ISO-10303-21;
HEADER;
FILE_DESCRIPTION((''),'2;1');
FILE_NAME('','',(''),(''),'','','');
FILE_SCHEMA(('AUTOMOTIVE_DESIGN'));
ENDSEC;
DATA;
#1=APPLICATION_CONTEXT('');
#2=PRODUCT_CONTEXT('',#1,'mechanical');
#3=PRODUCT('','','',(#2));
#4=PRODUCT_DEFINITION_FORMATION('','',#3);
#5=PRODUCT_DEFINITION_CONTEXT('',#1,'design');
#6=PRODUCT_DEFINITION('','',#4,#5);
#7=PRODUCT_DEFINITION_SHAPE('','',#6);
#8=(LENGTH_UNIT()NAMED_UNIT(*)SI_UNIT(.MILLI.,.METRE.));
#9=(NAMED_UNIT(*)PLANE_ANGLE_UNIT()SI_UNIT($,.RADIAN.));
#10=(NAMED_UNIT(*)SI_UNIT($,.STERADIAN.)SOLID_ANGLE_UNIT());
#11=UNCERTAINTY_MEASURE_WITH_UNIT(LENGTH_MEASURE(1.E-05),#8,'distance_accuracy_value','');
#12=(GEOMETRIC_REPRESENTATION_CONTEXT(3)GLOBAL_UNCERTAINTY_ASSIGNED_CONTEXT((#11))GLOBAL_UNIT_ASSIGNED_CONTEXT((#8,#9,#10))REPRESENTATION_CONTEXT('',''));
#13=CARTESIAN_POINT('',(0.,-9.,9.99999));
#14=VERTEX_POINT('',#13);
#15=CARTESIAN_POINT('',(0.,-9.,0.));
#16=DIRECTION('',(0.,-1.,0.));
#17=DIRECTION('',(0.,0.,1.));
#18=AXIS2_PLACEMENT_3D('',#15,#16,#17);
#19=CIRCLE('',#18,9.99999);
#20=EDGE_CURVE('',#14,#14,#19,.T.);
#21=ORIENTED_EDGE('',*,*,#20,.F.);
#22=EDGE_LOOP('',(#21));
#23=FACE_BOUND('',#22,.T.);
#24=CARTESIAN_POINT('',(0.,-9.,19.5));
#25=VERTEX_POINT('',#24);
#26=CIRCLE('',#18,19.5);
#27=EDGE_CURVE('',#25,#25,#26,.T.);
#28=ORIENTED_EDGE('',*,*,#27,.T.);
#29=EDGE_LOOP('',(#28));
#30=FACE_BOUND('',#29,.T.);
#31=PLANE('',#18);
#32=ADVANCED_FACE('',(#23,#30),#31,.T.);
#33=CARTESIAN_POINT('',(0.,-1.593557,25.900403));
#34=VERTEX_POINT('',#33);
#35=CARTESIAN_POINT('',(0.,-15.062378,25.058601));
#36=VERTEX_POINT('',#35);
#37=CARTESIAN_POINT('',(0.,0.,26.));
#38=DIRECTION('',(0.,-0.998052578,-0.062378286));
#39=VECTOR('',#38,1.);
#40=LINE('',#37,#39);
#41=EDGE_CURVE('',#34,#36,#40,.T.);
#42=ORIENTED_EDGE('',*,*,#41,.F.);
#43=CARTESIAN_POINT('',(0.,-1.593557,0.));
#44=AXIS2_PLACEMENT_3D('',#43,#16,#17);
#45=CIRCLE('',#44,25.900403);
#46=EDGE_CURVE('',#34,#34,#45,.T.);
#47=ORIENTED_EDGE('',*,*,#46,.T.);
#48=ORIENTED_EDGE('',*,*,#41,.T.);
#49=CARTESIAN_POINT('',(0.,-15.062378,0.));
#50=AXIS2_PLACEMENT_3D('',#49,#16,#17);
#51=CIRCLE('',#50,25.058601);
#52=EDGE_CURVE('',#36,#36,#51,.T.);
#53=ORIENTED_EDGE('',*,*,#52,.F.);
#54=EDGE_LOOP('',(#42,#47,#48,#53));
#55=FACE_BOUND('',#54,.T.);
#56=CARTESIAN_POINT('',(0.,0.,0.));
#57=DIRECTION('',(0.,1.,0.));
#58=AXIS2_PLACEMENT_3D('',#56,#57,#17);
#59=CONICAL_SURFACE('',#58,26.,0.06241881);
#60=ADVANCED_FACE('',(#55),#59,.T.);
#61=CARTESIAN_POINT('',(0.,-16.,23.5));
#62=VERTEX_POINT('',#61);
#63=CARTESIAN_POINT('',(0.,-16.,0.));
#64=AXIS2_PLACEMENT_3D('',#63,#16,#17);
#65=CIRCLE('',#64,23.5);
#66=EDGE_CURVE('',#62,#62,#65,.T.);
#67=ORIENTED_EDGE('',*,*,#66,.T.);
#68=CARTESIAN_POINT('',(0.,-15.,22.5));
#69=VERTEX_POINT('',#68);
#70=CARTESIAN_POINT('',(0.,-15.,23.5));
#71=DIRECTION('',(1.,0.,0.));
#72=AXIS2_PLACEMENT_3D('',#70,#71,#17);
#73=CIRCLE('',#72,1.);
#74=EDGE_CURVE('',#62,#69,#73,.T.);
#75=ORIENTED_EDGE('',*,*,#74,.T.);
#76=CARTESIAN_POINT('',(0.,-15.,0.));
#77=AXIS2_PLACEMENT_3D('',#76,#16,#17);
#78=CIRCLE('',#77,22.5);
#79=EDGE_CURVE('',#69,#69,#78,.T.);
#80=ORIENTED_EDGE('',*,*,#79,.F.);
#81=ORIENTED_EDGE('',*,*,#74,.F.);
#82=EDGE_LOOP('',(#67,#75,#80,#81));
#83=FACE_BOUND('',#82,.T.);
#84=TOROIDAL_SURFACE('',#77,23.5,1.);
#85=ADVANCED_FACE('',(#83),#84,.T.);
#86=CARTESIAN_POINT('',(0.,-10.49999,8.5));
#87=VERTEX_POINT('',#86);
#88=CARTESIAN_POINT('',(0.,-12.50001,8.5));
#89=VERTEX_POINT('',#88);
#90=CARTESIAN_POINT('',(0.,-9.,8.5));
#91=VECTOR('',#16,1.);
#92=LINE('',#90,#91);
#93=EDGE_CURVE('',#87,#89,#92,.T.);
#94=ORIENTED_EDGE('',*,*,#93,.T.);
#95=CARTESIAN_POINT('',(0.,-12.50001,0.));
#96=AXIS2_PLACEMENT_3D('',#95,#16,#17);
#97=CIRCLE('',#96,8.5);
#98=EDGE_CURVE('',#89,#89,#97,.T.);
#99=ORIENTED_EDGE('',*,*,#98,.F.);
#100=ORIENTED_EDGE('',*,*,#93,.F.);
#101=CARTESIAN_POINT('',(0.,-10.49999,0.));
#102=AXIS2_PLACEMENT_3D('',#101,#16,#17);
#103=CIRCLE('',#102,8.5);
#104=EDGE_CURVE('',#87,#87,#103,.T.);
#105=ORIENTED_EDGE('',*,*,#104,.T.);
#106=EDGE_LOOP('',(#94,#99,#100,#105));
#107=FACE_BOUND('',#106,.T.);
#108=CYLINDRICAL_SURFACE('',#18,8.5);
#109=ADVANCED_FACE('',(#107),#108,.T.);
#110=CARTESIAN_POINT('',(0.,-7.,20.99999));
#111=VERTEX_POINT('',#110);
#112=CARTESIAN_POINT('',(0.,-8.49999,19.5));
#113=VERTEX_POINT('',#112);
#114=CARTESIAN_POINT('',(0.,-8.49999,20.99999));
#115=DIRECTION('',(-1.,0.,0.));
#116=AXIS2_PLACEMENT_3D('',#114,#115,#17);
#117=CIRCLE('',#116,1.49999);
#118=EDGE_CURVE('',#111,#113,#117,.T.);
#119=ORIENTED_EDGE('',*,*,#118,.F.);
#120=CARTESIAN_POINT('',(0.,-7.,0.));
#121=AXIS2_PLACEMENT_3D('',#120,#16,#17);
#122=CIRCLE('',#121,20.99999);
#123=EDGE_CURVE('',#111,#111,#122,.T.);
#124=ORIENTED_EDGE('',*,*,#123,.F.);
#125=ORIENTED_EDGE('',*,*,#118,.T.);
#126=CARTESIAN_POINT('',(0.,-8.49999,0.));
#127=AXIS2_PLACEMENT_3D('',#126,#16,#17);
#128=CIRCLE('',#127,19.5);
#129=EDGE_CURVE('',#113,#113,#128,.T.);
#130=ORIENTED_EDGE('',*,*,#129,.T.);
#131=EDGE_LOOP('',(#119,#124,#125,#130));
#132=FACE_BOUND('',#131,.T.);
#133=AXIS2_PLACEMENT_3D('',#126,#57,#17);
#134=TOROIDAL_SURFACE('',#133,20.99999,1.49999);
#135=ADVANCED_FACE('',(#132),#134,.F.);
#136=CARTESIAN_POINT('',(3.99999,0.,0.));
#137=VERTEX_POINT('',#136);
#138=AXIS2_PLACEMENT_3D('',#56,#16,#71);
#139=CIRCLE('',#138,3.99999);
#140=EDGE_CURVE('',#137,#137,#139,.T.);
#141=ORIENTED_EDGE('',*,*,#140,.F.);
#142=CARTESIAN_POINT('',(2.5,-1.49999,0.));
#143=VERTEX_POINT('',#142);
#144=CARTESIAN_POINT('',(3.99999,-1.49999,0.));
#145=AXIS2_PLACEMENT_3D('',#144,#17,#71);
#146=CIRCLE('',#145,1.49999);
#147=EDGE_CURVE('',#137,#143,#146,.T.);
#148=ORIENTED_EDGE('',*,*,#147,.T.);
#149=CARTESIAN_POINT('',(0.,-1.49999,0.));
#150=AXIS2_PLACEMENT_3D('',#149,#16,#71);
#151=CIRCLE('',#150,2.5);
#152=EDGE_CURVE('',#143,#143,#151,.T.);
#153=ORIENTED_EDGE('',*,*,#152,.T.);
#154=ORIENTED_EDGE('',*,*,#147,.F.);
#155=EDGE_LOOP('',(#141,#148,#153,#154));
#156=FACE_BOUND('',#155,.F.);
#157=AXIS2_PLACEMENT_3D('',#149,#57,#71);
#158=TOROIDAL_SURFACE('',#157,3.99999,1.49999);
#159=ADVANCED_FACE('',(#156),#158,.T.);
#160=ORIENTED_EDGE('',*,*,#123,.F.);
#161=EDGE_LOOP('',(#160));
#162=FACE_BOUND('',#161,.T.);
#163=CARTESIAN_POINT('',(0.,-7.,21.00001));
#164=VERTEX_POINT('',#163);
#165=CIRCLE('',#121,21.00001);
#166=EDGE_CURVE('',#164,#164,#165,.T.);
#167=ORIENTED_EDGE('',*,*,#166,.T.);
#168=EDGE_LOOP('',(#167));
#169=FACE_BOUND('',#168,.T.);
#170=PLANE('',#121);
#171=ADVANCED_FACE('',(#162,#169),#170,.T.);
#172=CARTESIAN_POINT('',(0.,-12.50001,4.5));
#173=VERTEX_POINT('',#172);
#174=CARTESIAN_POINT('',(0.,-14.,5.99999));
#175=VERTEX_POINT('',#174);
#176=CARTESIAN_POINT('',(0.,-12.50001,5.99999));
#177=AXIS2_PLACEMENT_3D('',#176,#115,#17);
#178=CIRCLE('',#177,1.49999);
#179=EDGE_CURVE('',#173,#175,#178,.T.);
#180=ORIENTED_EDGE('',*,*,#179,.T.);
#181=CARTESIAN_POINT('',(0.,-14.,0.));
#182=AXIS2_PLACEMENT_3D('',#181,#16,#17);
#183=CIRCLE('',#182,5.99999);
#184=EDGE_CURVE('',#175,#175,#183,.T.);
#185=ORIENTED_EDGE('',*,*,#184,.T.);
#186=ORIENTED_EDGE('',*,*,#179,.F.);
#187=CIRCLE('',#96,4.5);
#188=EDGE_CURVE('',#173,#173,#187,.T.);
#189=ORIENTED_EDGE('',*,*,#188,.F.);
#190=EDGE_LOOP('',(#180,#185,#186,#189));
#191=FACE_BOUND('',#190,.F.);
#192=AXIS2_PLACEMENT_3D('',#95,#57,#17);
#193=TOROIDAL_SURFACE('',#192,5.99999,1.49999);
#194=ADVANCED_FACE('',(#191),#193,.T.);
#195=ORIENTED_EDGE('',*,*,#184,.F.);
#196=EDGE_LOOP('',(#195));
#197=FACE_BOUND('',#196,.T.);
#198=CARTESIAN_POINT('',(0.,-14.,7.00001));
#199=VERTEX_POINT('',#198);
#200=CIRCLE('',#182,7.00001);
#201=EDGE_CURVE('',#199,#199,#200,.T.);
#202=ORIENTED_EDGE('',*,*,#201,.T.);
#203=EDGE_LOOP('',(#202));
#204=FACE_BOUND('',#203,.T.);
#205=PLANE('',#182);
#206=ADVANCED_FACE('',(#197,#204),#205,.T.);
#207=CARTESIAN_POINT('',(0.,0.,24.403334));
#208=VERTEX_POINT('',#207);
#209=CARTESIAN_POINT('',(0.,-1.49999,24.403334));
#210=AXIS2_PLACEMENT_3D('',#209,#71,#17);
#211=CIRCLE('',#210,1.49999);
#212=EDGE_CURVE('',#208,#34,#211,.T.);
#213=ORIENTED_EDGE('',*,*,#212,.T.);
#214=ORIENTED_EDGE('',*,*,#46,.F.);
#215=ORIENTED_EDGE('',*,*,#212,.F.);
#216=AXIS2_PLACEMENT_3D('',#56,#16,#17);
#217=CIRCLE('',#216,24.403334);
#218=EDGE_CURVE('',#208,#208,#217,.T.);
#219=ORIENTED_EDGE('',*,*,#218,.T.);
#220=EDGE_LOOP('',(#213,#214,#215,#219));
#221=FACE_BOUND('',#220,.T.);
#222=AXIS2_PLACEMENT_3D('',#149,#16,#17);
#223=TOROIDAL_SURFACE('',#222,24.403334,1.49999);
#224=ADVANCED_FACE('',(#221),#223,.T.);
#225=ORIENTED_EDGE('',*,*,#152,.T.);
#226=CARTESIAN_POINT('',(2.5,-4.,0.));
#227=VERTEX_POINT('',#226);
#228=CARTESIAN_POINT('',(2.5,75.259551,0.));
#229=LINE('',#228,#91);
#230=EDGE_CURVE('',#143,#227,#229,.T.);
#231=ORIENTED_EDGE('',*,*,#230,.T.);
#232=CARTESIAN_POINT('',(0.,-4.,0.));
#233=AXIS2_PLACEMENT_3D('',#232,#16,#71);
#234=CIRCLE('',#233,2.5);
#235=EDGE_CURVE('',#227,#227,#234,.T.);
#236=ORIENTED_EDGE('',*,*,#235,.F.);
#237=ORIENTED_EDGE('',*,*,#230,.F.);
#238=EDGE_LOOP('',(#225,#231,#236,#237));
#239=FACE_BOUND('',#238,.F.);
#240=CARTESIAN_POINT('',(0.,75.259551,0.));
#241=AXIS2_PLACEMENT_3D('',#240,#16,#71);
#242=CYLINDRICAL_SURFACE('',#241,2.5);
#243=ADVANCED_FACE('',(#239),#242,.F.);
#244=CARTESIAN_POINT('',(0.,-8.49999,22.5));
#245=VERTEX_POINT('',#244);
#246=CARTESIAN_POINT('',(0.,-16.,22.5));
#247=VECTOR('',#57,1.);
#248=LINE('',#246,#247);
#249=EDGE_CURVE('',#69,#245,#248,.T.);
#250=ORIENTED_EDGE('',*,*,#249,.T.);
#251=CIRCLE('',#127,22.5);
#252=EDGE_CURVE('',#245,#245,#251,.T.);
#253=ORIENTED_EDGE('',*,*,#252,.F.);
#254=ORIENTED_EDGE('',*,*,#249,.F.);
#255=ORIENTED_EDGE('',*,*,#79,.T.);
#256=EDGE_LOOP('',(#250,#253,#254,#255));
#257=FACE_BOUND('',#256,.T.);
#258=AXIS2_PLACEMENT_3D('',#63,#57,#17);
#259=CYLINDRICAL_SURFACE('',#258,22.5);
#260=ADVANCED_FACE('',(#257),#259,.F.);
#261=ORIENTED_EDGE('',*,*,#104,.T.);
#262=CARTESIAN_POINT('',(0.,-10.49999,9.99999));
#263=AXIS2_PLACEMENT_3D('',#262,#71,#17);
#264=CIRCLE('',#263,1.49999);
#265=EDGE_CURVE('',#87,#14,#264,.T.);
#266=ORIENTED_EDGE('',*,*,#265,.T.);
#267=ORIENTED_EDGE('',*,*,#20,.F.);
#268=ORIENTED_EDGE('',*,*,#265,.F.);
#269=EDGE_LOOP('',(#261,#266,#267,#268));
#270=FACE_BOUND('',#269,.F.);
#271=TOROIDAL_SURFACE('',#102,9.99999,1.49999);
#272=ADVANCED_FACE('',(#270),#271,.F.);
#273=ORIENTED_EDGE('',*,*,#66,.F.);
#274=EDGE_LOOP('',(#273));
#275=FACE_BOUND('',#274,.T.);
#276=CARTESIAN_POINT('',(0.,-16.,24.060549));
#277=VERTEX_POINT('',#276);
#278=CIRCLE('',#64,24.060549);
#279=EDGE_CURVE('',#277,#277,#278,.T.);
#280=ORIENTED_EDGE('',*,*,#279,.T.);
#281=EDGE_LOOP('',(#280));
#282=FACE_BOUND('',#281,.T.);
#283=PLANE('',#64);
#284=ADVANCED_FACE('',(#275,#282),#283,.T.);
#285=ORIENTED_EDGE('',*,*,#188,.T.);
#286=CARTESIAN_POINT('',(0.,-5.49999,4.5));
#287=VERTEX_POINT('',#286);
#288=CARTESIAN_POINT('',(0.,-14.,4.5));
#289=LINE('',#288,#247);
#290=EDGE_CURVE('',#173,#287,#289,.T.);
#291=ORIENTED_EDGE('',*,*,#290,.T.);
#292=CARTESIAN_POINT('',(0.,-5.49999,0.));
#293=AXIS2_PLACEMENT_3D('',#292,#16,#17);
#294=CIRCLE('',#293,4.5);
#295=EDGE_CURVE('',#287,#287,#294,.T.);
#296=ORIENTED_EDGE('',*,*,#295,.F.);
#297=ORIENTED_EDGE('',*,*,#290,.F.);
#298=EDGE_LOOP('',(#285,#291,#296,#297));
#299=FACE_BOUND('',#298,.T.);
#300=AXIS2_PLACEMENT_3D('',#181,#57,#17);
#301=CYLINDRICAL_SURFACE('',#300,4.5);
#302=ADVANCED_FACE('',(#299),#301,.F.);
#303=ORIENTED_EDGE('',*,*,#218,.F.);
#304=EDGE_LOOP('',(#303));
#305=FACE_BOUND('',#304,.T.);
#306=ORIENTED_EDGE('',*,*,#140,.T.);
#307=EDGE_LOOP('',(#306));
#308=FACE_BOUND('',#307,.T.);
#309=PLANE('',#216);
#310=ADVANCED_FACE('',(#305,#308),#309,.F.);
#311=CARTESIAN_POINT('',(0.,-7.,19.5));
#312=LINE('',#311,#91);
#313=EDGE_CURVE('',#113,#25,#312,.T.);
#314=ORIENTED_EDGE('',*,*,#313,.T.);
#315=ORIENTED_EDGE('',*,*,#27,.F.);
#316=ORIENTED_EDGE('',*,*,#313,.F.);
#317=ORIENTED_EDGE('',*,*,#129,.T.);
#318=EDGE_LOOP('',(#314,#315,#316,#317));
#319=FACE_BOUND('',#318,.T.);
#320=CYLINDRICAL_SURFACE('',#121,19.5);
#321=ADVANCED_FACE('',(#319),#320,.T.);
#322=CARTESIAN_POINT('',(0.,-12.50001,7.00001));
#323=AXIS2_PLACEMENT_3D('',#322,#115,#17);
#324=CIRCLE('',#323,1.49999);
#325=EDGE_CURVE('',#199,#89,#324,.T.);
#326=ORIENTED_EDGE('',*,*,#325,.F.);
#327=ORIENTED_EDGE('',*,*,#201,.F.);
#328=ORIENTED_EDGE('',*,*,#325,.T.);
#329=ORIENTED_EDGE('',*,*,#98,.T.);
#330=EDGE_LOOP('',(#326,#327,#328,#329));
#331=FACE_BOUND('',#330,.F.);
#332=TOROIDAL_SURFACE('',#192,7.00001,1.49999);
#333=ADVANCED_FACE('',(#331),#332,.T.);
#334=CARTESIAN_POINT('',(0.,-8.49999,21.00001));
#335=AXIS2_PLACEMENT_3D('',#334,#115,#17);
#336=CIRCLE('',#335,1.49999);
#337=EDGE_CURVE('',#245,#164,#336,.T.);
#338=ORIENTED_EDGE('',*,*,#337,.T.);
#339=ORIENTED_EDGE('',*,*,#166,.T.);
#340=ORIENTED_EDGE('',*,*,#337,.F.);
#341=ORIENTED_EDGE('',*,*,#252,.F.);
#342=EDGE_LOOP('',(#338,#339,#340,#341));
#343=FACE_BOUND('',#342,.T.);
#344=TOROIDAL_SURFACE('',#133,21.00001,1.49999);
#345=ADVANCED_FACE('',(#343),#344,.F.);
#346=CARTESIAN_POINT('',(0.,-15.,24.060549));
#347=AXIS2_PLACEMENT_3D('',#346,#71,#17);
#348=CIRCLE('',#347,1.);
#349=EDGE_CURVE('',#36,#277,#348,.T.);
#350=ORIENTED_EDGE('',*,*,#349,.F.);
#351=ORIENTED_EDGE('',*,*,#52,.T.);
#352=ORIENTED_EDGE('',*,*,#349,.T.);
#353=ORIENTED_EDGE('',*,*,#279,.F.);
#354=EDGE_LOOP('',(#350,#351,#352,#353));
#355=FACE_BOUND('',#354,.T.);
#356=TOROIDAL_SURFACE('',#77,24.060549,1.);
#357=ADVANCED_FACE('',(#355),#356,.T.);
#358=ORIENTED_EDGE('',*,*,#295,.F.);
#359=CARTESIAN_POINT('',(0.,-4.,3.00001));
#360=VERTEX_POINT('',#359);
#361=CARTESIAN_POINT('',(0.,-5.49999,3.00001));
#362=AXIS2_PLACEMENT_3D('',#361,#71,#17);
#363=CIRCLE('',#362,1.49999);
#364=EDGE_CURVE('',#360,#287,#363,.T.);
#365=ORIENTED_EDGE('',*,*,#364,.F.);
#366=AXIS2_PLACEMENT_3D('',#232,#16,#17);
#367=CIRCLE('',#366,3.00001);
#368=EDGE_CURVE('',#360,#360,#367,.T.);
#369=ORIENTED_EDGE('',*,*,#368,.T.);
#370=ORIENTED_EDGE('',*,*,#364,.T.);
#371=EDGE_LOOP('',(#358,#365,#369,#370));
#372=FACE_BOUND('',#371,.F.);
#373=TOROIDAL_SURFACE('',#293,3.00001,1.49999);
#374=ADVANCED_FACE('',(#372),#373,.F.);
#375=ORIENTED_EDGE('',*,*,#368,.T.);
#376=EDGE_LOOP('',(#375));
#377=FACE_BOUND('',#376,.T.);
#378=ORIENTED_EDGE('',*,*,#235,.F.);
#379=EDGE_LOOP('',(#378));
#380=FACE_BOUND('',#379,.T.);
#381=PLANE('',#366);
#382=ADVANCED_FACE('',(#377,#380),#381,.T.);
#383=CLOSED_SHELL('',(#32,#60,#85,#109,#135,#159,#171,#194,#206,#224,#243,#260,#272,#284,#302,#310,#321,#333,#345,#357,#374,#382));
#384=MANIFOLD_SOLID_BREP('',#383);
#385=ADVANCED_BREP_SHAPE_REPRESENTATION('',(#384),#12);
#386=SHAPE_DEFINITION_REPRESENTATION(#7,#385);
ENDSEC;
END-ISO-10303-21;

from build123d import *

# Parameters (mm, degrees)
F3_D = 5
F4_R = 1.49999
F5_R = 1


# Not quite as in the source:
# - a fillet or chamfer is up to 0.001 mm smaller than in the source, because OpenCascade refuses the exact size


with BuildPart() as f1:
    # F0 (on Right) → F1 (revolve)
    with BuildSketch(Plane.YZ):
        Polygon((-4, 0), (0, 0), (0, 26), (-16, 25), (-16, 22.5), (-7, 22.5), (-7, 19.5), (-9, 19.5), (-9, 8.5), (-14, 8.5), (-14, 4.5), (-4, 4.5), align=None)
    revolve(axis=Axis((0, -2, 0), (0, -1, 0)))

    # F3 (through all)
    with Locations(Plane(origin=(0, 0, 0), x_dir=(-1, 0, 0), z_dir=(0, 1, 0))):
        with Locations((0, 0)):
            Hole(F3_D / 2)

    # F4 (radius 1.5 in the source; OpenCascade refuses exactly that, so slightly less here)
    f4_edges = [f1.edges().sort_by_distance(p)[0] for p in [
        (0, -14, -8.5),
        (0, -14, -4.5),
        (0, -7, -22.5),
        (0, -7, -19.5),
        (0, 0, -26),
        (0, -4, -4.5),
        (0, -9, -8.5),
        (2.5, 0, 0),
    ]]
    fillet(f4_edges, radius=F4_R)

    # F5
    f5_edges = [f1.edges().sort_by_distance(p)[0] for p in [
        (0, -16, -25),
        (0, -16, -22.5),
    ]]
    fillet(f5_edges, radius=F5_R)


solid = f1.part
